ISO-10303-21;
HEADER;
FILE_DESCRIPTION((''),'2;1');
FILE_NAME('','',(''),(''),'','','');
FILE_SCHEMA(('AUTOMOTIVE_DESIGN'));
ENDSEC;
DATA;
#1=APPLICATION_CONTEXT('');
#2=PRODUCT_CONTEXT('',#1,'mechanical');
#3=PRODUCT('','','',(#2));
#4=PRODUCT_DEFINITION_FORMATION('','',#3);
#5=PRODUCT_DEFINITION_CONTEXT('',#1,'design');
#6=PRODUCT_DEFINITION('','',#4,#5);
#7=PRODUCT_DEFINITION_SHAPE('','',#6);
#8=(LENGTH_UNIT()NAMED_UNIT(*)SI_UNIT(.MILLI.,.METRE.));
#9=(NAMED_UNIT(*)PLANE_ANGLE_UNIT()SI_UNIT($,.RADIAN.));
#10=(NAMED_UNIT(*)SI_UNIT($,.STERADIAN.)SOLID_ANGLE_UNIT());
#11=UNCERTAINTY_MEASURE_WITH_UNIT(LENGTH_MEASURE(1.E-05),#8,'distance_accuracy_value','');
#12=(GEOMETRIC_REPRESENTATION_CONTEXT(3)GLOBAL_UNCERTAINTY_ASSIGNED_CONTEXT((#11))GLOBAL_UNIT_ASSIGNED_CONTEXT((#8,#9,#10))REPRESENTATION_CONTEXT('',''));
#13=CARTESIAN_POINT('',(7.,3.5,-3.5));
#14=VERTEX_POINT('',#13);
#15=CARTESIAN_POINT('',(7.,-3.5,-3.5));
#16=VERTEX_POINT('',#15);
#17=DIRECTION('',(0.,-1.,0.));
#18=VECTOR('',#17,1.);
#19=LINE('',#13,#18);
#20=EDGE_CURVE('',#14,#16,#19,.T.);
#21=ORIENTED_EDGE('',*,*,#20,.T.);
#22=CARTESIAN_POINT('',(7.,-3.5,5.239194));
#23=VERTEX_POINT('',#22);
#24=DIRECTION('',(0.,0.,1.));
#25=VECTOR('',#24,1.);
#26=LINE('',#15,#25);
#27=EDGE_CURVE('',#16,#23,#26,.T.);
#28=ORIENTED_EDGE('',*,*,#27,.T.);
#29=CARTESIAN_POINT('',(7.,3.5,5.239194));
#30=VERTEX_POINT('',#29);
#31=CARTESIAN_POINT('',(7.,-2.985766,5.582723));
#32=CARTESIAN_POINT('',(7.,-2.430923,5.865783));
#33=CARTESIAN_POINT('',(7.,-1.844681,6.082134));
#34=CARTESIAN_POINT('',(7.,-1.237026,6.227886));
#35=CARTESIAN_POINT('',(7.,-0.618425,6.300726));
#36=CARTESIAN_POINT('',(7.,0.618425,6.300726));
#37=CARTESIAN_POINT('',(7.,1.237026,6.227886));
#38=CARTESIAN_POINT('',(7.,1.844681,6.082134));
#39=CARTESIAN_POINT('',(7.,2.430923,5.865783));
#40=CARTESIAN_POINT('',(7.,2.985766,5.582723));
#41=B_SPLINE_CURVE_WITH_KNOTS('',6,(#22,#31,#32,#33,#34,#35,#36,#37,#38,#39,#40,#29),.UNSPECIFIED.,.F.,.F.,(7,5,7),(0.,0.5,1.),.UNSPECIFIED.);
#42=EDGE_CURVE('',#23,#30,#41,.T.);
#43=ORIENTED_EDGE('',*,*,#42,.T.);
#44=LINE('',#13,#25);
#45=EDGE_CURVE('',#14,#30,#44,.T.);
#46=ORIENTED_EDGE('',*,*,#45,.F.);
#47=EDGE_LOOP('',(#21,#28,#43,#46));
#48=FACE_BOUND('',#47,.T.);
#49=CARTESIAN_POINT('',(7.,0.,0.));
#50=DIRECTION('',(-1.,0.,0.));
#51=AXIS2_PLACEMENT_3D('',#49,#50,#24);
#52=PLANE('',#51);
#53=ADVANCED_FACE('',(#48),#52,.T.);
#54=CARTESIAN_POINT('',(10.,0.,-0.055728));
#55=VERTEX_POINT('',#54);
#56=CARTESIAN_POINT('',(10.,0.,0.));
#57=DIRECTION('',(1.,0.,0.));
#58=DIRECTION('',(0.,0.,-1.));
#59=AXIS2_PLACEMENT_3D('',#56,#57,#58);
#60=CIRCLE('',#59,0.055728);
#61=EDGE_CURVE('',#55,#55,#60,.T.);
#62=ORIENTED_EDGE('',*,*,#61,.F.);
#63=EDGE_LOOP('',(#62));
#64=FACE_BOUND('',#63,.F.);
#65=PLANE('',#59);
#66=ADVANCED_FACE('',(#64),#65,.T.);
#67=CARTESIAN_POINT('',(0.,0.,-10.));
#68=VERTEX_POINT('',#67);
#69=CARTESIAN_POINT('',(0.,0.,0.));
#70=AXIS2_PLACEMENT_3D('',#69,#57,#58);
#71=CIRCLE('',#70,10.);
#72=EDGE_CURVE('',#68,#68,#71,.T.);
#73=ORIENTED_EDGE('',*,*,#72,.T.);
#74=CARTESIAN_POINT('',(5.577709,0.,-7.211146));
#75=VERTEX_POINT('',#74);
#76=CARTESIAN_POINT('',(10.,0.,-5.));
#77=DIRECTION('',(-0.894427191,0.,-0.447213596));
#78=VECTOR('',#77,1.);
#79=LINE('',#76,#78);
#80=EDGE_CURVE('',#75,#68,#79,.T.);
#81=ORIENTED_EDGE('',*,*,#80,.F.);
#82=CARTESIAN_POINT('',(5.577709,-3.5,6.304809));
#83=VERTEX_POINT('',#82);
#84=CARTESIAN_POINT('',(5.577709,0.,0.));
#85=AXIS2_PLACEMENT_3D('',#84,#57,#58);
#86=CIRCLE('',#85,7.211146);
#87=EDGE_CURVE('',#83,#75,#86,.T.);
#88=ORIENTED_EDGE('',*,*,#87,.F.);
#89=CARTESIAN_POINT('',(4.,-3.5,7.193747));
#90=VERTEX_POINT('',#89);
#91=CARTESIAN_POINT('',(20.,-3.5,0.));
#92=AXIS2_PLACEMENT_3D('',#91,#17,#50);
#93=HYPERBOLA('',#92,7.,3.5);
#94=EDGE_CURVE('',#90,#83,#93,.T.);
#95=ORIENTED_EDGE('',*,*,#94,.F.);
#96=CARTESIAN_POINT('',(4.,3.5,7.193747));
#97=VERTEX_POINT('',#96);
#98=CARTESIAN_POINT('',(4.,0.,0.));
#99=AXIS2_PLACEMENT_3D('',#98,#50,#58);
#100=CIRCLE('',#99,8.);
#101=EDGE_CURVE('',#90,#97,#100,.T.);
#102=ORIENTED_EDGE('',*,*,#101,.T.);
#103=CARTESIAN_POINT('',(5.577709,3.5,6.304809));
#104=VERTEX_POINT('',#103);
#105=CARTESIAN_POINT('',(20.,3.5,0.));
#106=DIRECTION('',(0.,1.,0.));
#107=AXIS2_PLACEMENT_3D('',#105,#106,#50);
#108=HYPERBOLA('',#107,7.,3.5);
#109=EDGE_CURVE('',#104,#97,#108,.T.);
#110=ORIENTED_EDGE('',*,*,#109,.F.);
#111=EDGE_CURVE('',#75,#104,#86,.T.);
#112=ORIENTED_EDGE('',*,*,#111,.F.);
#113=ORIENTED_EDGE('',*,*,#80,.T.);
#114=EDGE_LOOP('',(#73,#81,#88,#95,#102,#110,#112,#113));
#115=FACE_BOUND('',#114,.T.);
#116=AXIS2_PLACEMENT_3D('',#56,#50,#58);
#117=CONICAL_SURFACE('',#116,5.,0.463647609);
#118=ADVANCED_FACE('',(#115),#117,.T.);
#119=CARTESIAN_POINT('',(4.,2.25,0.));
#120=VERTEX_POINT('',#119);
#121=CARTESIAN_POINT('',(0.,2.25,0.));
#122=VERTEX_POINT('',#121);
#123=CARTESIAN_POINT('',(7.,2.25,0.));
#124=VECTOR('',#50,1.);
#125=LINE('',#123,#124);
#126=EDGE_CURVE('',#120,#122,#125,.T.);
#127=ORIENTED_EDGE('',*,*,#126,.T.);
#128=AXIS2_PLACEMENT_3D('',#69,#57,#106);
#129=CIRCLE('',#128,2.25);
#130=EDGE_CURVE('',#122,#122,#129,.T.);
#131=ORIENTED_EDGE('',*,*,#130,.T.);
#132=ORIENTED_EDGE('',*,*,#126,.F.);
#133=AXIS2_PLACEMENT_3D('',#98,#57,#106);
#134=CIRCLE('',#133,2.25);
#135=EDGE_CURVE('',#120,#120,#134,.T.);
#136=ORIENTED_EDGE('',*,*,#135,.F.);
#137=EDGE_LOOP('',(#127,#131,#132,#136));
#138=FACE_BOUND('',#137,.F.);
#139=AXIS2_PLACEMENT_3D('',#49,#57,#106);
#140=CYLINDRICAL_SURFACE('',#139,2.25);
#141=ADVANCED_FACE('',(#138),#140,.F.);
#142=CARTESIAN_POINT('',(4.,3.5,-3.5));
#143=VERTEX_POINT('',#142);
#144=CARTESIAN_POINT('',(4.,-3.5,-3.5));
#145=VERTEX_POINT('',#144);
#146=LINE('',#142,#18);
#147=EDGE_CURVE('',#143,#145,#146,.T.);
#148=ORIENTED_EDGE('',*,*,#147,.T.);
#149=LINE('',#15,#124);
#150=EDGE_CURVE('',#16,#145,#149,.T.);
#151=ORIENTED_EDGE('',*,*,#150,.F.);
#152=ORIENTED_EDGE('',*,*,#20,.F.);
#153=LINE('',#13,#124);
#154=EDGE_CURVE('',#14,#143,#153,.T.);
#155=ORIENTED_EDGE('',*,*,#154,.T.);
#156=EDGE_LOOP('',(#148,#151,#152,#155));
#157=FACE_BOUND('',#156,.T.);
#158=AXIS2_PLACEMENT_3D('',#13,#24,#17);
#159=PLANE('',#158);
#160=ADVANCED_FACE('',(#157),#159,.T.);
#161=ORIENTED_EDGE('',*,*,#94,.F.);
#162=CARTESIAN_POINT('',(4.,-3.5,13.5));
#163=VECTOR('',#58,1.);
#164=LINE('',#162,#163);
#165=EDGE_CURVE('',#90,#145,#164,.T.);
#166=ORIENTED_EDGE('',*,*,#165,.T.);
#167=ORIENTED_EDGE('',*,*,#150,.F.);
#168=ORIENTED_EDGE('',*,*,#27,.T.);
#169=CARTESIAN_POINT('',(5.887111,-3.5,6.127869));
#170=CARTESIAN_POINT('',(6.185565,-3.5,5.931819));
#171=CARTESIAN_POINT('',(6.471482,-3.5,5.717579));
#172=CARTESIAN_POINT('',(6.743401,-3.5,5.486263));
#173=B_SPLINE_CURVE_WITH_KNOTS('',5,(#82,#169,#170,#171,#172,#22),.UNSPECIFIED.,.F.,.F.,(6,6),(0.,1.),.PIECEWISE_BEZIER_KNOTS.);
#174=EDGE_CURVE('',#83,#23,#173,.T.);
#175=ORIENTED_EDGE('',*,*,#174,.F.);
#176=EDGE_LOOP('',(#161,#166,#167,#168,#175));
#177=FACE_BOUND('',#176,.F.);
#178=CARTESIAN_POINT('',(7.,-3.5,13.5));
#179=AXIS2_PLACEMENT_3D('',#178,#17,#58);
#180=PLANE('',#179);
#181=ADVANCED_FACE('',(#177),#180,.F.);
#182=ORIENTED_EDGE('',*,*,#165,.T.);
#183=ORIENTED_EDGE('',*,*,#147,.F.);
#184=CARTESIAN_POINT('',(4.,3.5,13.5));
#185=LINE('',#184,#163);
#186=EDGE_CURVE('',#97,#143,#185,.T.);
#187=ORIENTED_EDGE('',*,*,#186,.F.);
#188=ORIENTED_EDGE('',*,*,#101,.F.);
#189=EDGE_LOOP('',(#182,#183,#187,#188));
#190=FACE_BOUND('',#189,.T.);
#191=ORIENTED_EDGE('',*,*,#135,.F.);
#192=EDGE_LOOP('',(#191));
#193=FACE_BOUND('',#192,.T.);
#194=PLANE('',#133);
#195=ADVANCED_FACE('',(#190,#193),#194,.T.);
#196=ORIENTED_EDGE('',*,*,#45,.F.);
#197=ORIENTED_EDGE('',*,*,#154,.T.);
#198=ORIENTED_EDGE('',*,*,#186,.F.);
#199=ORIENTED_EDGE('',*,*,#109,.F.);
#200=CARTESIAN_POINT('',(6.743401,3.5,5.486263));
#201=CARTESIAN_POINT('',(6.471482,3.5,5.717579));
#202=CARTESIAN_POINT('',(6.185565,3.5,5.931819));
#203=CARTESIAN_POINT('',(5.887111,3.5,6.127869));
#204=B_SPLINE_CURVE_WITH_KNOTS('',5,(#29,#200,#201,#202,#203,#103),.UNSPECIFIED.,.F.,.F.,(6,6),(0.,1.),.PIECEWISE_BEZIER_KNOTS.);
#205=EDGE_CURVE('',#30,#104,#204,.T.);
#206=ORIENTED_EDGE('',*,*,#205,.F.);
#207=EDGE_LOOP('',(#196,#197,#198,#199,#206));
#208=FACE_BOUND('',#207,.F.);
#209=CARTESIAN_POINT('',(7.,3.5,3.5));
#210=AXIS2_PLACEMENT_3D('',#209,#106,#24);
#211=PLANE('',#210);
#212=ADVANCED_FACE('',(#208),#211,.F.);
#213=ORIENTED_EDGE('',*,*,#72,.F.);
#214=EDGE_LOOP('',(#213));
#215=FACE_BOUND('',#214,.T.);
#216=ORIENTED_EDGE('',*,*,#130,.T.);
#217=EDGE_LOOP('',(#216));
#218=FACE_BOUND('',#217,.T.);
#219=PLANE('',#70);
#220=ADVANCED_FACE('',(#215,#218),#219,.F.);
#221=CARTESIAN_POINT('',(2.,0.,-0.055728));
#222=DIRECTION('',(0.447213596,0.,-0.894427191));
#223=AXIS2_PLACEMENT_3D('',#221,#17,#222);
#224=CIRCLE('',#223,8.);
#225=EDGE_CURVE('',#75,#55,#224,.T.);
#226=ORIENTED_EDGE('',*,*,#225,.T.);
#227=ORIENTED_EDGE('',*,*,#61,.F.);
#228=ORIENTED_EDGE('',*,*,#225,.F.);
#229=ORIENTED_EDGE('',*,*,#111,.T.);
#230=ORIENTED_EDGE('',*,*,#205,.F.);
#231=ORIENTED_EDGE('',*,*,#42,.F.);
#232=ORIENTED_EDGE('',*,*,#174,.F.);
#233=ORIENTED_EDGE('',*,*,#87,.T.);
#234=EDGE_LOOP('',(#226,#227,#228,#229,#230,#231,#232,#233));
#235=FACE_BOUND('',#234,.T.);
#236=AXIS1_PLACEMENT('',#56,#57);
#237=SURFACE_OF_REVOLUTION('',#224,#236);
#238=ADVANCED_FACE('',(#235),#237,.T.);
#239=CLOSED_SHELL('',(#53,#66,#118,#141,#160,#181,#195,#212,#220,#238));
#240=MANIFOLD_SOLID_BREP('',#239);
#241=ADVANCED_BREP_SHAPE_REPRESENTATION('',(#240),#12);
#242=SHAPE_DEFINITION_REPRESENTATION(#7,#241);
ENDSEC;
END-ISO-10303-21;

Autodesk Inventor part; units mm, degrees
ref_plane "XZ Plane" through (0, 0, 0) normal (0, 1, 0) x (-1, 0, 0)
ref_plane "XY Plane" through (0, 0, 0) normal (0, 0, 1) x (1, 0, 0)
ref_plane "Work Plane1" through (7, 0, 0) normal (1, 0, 0) x (0, 1, 0)
sketch "Sketch1" plane through (0, 0, 0) normal (0, 1, 0) x (-1, 0, 0)
  line L0 (0, 0) -> (-10, 0)
  line L1 (0, 0) -> (0, -10)
  line L2 (-10, 0) -> (-10, -5)
  line L3 (-10, -5) -> (0, -10)
  dimension "d0" = 10
  dimension "d1" = 10
  dimension "d2" = 5
revolve "Revolution1" add sketch "Sketch1" angle 360 about axis through (0, 0, 0) along (1, 0, 0)
sketch "Sketch2" plane through (7, 0, 0) normal (1, 0, 0) x (0, 1, 0)
  circle A0 centre (0, 0) radius 2.25
  dimension "d5" = 4.5
extrude "Extrusion1" cut sketch "Sketch2" along normal blind 2 and the other way blind 10
sketch "Sketch3" plane through (7, 0, 0) normal (1, 0, 0) x (0, 1, 0)
  line L0 (-3.5, 3.5) -> (3.5, 3.5)
  line L1 (3.5, 3.5) -> (3.5, -3.5)
  line L2 (3.5, -3.5) -> (-3.5, -3.5)
  line L3 (-3.5, -3.5) -> (-3.5, 3.5)
  line L4 (-3.5, 3.5) -> (3.5, -3.5) construction
  line L5 (3.5, 3.5) -> (-3.5, -3.5) construction
  line L6 (-3.5, 3.5) -> (3.5, 3.5)
  line L7 (3.5, 3.5) -> (3.5, 13.5)
  line L8 (3.5, 13.5) -> (-3.5, 13.5)
  line L9 (-3.5, 13.5) -> (-3.5, 3.5)
  point P0 (0, 0)
  dimension "d18" = 7
  dimension "d19" = 7
  dimension "d20" = 7
  dimension "d21" = 10
extrude "Extrusion2" cut sketch "Sketch3" against normal blind 3
sketch "Sketch5" plane through (9, 0, 0) normal (-1, 0, 0) x (0, 0, 1)
  circle A0 centre (0, 0) radius 2.25 projected
extrude "Extrusion3" add sketch "Sketch5" along normal up to surface (2 mm away)
sketch "Sketch7" plane through (10, 0, 0) normal (1, 0, 0) x (0, 0, -1)
  circle A0 centre (0, 0) radius 5 projected
extrude "Extrusion4" [suppressed]
fillet "Fillet2" radius 8 1 edges at (10, 0, 5)
properties part number "stollen_m4_vierkant_rounded"
